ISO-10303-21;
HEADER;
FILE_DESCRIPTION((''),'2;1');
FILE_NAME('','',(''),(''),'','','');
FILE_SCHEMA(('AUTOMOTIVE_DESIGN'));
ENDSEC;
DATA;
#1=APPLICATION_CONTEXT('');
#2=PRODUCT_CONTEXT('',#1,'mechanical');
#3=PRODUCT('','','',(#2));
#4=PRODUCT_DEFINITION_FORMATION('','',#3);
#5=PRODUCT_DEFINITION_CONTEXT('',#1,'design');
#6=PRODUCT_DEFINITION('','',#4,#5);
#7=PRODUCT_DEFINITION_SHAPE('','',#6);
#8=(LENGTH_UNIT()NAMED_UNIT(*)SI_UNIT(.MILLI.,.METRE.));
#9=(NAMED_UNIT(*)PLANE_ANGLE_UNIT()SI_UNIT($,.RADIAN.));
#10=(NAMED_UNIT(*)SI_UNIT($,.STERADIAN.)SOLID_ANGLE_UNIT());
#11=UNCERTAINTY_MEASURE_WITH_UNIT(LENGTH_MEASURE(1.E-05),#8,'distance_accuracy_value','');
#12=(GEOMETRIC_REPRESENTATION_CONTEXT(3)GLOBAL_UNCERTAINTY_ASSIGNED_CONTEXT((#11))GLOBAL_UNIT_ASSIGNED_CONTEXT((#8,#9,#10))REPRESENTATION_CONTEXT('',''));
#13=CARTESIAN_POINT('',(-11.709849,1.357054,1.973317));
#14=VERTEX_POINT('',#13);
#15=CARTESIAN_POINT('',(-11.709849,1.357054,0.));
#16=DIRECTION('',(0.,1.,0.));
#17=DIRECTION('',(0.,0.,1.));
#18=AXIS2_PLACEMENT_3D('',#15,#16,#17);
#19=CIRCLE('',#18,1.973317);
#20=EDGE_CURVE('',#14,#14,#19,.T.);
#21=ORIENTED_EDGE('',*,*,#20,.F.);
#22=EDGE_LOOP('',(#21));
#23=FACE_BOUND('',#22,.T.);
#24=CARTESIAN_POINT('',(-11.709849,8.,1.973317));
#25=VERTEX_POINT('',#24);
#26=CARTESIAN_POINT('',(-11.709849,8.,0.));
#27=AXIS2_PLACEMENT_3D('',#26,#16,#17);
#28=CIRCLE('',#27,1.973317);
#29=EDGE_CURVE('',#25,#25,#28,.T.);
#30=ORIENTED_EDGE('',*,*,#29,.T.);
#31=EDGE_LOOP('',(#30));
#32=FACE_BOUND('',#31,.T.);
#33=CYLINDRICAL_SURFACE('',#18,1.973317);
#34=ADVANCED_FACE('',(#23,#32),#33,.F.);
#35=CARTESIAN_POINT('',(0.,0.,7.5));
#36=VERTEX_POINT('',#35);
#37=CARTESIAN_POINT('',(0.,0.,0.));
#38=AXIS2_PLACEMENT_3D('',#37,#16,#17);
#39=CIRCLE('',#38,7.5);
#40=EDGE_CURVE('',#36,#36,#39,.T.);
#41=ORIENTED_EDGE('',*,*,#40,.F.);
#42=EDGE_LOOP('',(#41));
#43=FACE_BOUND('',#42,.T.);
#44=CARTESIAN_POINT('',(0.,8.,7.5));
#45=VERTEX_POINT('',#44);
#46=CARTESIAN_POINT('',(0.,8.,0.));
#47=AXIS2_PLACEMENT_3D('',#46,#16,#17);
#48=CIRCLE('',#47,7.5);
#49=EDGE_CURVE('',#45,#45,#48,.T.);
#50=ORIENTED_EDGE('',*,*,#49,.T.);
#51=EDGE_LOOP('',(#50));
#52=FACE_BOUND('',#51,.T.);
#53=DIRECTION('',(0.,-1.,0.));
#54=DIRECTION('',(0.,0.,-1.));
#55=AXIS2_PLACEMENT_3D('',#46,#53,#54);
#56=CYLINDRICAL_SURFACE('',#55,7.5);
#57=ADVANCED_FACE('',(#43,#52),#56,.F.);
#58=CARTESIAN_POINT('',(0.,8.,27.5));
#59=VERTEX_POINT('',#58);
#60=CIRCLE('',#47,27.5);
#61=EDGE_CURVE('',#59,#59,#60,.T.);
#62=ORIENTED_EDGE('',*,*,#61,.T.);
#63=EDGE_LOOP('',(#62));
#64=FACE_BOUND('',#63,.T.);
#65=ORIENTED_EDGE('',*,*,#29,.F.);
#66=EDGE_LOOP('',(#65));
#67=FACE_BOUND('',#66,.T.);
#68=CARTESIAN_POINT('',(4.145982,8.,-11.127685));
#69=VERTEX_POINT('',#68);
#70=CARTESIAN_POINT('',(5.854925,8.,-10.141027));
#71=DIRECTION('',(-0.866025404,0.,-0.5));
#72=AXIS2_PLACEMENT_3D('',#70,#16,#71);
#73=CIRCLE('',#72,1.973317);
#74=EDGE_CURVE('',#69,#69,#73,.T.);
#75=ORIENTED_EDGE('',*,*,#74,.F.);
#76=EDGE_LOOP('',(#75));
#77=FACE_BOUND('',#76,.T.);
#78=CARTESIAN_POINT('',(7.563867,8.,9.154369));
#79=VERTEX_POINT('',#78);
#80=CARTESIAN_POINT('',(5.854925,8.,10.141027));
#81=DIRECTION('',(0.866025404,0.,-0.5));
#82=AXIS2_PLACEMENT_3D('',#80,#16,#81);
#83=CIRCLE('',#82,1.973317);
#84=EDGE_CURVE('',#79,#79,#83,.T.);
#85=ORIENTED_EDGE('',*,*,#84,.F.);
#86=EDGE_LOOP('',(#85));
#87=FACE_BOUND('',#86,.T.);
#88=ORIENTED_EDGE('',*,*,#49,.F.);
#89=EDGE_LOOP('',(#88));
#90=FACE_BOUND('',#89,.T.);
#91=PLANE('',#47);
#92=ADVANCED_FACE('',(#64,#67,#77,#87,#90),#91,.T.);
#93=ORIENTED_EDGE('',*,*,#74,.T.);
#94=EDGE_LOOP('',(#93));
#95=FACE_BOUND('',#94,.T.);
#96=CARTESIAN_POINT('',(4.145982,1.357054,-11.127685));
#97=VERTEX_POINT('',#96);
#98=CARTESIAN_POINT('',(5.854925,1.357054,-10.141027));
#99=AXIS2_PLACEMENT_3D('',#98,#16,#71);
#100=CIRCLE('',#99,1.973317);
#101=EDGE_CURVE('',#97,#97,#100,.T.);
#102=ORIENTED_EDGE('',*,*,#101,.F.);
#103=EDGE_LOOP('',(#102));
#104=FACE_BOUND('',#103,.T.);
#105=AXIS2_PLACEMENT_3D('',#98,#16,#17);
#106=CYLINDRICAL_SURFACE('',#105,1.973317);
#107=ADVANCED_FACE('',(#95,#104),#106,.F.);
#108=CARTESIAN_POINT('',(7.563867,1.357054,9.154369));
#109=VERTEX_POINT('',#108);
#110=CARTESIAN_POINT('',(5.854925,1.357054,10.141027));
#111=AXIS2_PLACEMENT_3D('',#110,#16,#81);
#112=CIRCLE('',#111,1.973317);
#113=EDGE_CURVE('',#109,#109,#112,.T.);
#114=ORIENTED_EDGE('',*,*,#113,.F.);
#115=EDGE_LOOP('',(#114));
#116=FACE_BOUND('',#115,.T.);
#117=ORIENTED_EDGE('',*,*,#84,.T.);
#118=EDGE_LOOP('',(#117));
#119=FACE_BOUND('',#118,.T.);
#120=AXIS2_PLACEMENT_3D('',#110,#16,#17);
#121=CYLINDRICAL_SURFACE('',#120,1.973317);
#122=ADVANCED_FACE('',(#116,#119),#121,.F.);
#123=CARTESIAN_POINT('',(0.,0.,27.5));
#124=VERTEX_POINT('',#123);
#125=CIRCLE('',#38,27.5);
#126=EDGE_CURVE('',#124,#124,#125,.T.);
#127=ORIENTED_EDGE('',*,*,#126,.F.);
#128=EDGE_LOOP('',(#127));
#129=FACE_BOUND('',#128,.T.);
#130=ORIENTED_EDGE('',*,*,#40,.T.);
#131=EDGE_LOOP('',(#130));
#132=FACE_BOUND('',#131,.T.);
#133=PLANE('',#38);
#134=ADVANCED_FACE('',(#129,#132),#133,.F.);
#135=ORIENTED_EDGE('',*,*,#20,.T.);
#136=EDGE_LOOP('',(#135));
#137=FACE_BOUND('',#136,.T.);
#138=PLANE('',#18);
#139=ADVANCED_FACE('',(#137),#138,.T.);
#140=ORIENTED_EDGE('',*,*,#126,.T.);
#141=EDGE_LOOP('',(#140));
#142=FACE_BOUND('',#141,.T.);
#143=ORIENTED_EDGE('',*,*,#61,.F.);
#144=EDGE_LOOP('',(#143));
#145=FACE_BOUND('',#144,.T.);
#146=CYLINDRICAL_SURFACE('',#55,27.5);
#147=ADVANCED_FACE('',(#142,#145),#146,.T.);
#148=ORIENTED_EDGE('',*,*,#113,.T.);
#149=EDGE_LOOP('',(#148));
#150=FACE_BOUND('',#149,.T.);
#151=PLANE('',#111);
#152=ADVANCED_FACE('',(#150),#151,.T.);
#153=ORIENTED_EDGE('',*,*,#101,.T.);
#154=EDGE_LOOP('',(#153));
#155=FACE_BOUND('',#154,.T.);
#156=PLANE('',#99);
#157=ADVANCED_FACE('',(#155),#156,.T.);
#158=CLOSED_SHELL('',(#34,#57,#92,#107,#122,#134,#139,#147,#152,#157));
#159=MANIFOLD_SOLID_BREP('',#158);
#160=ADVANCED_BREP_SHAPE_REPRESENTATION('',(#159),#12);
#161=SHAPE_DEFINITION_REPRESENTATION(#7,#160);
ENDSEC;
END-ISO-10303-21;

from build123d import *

# Parameters (mm, degrees)
SKETCH1_R           = 27.5
BOSS_EXTRUDE1_DEPTH = 8
SKETCH2_R           = 7.5
CUT_EXTRUDE1_DEPTH  = 40.705163392
SKETCH3_R           = 1.973316749
CUT_EXTRUDE2_DEPTH  = 6.642946017
CIRPATTERN1_COUNT   = 3


with BuildPart() as part:
    # Sketch1 → Boss-Extrude1 (new body)
    with BuildSketch(Plane(origin=(0, 0, 0), x_dir=(1, 0, 0), z_dir=(0, 1, 0))):
        Circle(SKETCH1_R)
    extrude(amount=BOSS_EXTRUDE1_DEPTH)

    # Sketch2 → Cut-Extrude1 (cut, through all)
    with BuildSketch(Plane(origin=(0, 0, 0), x_dir=(1, 0, 0), z_dir=(0, 1, 0))):
        Circle(SKETCH2_R)
    extrude(amount=CUT_EXTRUDE1_DEPTH, mode=Mode.SUBTRACT)

    # Sketch3 → Cut-Extrude2 (cut)
    with BuildSketch(Plane(origin=(0, 8, 0), x_dir=(1, 0, 0), z_dir=(0, 1, 0))):
        with Locations((-11.709849239, 0)):
            Circle(SKETCH3_R)
    cut_extrude2 = extrude(amount=-CUT_EXTRUDE2_DEPTH, mode=Mode.SUBTRACT)

    # CirPattern1: Cut-Extrude2 ×3 about axis
    cirpattern1_axis = Axis((0, 0, 0), (0, 1, 0))
    for i in range(1, CIRPATTERN1_COUNT):
        add(cut_extrude2.rotate(cirpattern1_axis, i * 360 / CIRPATTERN1_COUNT), mode=Mode.SUBTRACT)


solid = part.part
